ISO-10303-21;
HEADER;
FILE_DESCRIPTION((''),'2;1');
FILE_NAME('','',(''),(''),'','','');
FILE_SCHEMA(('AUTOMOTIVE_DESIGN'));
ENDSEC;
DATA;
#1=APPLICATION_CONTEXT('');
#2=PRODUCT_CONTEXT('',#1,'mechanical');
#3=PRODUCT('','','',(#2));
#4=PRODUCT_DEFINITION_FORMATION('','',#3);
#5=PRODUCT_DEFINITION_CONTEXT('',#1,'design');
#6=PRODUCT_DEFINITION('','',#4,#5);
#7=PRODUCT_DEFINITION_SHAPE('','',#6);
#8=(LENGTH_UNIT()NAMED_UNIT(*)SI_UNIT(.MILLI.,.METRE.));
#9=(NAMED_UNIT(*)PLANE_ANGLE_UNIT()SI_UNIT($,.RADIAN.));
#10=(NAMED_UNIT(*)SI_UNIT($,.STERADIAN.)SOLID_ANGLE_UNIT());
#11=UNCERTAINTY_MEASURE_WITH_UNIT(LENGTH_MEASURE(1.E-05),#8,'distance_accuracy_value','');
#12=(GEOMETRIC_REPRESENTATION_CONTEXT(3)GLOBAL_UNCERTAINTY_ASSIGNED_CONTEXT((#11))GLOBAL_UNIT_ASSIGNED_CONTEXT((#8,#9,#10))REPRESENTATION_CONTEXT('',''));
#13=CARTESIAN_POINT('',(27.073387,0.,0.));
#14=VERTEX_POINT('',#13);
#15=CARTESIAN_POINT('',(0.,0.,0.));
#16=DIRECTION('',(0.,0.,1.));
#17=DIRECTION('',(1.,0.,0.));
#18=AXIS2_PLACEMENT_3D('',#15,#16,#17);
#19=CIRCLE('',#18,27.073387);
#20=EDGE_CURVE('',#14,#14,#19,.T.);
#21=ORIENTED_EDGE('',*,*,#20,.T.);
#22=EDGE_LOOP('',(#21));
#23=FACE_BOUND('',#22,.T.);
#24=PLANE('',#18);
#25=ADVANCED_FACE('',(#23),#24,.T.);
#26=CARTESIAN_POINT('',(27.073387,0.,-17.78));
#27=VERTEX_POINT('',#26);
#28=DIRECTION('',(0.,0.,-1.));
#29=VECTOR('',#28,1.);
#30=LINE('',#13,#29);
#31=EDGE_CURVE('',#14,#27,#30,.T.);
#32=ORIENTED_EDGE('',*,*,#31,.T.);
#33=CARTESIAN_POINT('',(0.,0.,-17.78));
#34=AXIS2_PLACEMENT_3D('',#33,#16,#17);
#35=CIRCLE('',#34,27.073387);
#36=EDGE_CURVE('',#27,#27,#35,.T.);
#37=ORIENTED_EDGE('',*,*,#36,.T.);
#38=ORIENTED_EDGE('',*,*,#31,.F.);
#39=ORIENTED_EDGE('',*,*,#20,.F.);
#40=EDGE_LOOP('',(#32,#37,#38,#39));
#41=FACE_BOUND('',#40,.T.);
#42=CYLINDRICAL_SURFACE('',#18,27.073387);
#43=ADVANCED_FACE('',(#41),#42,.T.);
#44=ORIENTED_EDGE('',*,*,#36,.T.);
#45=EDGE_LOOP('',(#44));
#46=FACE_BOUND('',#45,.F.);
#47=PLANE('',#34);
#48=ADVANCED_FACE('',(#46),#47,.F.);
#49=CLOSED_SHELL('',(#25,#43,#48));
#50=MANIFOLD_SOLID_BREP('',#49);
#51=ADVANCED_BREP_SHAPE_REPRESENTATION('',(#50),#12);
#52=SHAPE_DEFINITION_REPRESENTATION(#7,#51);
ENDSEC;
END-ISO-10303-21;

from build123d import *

# Parameters (mm, degrees)
F1_R     = 27.0733874143
F4_DEPTH = 17.78


# Not quite as in the source:
# - the program builds the solid bodies; features that only make, move or delete a surface that nothing else refers to are left out


with BuildPart() as f4:
    # F1 (on face) → F4 (new body)
    with BuildSketch(Plane.XY):
        Circle(F1_R)
    extrude(amount=-F4_DEPTH)


solid = f4.part
